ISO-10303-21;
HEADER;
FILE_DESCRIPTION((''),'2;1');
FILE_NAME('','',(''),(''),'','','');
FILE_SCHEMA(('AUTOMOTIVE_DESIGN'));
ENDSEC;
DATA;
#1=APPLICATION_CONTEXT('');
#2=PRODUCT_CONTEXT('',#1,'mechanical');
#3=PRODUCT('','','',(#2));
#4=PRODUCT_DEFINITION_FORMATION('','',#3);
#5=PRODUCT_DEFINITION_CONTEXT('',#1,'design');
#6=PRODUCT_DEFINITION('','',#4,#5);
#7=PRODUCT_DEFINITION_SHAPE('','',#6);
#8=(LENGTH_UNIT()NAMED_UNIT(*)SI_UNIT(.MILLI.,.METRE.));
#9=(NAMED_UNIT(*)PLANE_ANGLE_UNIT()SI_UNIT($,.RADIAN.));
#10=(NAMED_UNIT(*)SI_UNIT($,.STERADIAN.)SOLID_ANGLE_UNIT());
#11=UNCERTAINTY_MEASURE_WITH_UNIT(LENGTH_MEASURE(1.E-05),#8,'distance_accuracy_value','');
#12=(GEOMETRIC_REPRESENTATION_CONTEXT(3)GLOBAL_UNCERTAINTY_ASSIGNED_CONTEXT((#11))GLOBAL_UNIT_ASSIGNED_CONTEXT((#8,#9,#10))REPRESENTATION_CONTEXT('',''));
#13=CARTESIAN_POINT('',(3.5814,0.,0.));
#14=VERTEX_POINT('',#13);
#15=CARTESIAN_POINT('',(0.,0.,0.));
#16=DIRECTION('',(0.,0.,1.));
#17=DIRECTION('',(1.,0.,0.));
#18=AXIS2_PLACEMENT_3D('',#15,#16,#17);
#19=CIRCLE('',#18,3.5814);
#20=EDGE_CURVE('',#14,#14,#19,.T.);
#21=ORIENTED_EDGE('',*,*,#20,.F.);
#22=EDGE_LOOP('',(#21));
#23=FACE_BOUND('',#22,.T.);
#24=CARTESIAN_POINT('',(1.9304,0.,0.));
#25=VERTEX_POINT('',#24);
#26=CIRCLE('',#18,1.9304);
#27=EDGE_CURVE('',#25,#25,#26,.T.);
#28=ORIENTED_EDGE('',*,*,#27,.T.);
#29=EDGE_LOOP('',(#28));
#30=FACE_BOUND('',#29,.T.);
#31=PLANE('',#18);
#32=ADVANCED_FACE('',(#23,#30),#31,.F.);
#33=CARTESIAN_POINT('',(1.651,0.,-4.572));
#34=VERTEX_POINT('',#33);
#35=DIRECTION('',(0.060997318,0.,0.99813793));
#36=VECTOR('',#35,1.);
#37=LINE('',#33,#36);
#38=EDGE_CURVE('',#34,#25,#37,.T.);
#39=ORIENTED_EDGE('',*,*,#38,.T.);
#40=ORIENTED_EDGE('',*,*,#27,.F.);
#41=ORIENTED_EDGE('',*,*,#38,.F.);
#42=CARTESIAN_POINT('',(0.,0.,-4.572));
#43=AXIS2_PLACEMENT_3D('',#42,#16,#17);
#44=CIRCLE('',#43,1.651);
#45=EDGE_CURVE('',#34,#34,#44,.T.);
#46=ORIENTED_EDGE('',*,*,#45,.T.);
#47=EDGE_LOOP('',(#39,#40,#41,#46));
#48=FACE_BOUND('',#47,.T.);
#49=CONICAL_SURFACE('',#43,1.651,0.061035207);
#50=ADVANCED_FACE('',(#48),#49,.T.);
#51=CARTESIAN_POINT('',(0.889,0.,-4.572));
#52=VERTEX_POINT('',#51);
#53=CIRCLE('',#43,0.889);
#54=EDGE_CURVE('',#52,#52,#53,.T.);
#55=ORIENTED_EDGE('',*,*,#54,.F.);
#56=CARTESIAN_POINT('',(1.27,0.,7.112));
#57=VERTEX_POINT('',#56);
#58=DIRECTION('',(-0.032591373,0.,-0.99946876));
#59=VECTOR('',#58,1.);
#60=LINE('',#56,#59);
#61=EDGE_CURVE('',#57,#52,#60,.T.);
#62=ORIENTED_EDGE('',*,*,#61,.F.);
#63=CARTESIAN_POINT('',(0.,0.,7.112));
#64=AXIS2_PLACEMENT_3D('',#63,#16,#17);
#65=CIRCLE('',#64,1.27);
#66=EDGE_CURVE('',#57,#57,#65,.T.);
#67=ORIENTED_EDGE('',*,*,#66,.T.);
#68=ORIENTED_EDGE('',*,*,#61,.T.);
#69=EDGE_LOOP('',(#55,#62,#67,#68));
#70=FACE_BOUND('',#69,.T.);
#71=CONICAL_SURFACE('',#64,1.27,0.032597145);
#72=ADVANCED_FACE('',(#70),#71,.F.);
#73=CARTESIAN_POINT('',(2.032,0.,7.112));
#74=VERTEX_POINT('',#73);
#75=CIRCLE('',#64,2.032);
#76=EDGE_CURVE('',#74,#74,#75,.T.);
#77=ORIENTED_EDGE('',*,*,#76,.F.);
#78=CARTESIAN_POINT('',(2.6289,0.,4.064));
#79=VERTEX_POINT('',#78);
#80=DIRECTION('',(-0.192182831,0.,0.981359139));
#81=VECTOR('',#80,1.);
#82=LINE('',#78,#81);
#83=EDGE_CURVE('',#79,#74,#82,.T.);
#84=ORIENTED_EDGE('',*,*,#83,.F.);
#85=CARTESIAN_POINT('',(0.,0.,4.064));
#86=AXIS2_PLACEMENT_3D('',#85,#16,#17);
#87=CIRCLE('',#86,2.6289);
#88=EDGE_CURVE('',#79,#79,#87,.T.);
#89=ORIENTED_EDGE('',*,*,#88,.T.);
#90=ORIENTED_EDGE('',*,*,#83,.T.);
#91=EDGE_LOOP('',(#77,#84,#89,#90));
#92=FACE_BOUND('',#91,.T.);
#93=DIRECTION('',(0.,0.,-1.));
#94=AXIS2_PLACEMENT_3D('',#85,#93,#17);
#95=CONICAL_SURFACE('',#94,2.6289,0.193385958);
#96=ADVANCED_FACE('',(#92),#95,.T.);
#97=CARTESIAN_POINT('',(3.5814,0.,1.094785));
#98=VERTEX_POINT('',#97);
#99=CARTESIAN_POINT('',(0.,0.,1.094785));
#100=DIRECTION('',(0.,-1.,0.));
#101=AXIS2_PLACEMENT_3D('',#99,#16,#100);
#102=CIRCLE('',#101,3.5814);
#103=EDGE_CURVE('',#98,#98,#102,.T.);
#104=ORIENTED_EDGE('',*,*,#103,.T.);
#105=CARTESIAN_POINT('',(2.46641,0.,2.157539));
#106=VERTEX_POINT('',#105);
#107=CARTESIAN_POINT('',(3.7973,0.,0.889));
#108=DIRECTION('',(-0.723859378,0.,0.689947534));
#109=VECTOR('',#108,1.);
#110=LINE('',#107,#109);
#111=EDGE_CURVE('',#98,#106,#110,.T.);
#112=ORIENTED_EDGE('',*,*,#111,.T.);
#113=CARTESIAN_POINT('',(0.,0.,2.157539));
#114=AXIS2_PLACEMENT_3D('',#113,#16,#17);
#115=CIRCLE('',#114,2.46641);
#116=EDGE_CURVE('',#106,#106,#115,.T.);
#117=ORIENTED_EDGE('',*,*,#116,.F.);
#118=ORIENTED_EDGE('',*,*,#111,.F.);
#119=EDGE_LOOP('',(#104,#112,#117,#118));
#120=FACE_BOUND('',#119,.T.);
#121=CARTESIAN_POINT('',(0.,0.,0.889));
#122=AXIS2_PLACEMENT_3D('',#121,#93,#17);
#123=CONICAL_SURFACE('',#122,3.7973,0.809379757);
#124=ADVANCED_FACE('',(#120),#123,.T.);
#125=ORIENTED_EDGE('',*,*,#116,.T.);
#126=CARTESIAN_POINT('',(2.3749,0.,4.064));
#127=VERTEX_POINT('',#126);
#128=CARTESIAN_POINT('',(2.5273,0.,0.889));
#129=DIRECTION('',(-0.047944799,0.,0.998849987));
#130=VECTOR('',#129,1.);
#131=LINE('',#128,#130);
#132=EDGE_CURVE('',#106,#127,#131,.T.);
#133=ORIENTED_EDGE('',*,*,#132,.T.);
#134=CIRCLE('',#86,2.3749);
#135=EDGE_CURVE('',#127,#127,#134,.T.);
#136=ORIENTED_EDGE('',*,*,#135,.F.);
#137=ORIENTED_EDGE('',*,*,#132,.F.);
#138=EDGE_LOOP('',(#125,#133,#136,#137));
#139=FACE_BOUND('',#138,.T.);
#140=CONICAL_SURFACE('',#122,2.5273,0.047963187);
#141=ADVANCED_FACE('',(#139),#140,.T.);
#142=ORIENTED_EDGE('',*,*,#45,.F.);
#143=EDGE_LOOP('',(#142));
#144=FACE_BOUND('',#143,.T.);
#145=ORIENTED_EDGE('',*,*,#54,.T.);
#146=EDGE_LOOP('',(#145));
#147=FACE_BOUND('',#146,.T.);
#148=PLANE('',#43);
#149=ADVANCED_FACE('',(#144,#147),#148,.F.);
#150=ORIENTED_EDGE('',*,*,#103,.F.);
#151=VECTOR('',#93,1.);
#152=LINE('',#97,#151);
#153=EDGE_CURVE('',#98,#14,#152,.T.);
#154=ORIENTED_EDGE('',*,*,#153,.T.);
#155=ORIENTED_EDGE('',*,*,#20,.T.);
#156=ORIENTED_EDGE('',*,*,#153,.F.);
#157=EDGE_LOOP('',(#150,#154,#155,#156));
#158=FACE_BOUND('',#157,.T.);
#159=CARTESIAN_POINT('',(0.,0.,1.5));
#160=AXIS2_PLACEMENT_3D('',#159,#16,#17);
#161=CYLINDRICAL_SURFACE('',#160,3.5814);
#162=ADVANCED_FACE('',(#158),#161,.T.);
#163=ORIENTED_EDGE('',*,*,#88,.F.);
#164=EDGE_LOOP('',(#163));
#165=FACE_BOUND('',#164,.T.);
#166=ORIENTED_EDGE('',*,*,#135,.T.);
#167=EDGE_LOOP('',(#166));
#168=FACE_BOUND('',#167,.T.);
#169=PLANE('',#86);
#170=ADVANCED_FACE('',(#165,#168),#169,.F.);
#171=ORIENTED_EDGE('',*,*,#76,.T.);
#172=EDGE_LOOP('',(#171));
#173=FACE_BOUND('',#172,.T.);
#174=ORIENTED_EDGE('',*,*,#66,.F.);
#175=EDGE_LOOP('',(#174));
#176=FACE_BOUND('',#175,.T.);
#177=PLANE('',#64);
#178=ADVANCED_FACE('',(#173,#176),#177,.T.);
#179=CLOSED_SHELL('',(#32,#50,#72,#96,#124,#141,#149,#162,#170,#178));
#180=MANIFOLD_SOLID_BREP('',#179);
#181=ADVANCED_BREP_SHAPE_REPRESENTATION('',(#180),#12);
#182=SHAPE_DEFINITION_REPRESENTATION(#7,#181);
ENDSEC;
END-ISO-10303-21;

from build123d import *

# Parameters (mm, degrees)
F2_S5_R     = 3.5814
F2_T6_DEPTH = 7


# Not quite as in the source:
# - a fillet or chamfer that OpenCascade refuses, or shapes differently, is made with other operations: its cross-section is extruded or revolved along the edge and cut away or added


with BuildPart() as f1:
    # F0 (on Front) → F1 (revolve)
    with BuildSketch(Plane.XZ):
        Polygon((0.889, -4.572), (1.651, -4.572), (1.9304, 0), (3.5814, 0), (3.5814, 0.889), (2.5273, 0.889), (2.3749, 4.064), (2.6289, 4.064), (2.032, 7.112), (1.27, 7.112), align=None)
    revolve(axis=Axis((0, 0, 1.778), (0, 0, 1)))

    # F2: chamfer of 1.27 on 1 edges, made by hand


with BuildPart() as f2_tool2:
    # F2_s3 → F2_t4 (revolve)
    with BuildSketch(Plane.XZ):
        Polygon((3.7973, 0.889), (2.4664101048, 2.1575394833), (2.5273, 0.889), align=None)
    revolve(axis=Axis((0, 0, 0.889), (0, 0, 1)))

    # F2_s5 → F2_t6 (intersect, symmetric)
    with BuildSketch(Plane.XY.offset(1.5)):
        Circle(F2_S5_R)
    extrude(amount=F2_T6_DEPTH, both=True, mode=Mode.INTERSECT)


with BuildPart() as f1_1:
    add(f1.part)

    # F2_t1: union F2_tool2
    add(f2_tool2.part)


solid = f1_1.part
